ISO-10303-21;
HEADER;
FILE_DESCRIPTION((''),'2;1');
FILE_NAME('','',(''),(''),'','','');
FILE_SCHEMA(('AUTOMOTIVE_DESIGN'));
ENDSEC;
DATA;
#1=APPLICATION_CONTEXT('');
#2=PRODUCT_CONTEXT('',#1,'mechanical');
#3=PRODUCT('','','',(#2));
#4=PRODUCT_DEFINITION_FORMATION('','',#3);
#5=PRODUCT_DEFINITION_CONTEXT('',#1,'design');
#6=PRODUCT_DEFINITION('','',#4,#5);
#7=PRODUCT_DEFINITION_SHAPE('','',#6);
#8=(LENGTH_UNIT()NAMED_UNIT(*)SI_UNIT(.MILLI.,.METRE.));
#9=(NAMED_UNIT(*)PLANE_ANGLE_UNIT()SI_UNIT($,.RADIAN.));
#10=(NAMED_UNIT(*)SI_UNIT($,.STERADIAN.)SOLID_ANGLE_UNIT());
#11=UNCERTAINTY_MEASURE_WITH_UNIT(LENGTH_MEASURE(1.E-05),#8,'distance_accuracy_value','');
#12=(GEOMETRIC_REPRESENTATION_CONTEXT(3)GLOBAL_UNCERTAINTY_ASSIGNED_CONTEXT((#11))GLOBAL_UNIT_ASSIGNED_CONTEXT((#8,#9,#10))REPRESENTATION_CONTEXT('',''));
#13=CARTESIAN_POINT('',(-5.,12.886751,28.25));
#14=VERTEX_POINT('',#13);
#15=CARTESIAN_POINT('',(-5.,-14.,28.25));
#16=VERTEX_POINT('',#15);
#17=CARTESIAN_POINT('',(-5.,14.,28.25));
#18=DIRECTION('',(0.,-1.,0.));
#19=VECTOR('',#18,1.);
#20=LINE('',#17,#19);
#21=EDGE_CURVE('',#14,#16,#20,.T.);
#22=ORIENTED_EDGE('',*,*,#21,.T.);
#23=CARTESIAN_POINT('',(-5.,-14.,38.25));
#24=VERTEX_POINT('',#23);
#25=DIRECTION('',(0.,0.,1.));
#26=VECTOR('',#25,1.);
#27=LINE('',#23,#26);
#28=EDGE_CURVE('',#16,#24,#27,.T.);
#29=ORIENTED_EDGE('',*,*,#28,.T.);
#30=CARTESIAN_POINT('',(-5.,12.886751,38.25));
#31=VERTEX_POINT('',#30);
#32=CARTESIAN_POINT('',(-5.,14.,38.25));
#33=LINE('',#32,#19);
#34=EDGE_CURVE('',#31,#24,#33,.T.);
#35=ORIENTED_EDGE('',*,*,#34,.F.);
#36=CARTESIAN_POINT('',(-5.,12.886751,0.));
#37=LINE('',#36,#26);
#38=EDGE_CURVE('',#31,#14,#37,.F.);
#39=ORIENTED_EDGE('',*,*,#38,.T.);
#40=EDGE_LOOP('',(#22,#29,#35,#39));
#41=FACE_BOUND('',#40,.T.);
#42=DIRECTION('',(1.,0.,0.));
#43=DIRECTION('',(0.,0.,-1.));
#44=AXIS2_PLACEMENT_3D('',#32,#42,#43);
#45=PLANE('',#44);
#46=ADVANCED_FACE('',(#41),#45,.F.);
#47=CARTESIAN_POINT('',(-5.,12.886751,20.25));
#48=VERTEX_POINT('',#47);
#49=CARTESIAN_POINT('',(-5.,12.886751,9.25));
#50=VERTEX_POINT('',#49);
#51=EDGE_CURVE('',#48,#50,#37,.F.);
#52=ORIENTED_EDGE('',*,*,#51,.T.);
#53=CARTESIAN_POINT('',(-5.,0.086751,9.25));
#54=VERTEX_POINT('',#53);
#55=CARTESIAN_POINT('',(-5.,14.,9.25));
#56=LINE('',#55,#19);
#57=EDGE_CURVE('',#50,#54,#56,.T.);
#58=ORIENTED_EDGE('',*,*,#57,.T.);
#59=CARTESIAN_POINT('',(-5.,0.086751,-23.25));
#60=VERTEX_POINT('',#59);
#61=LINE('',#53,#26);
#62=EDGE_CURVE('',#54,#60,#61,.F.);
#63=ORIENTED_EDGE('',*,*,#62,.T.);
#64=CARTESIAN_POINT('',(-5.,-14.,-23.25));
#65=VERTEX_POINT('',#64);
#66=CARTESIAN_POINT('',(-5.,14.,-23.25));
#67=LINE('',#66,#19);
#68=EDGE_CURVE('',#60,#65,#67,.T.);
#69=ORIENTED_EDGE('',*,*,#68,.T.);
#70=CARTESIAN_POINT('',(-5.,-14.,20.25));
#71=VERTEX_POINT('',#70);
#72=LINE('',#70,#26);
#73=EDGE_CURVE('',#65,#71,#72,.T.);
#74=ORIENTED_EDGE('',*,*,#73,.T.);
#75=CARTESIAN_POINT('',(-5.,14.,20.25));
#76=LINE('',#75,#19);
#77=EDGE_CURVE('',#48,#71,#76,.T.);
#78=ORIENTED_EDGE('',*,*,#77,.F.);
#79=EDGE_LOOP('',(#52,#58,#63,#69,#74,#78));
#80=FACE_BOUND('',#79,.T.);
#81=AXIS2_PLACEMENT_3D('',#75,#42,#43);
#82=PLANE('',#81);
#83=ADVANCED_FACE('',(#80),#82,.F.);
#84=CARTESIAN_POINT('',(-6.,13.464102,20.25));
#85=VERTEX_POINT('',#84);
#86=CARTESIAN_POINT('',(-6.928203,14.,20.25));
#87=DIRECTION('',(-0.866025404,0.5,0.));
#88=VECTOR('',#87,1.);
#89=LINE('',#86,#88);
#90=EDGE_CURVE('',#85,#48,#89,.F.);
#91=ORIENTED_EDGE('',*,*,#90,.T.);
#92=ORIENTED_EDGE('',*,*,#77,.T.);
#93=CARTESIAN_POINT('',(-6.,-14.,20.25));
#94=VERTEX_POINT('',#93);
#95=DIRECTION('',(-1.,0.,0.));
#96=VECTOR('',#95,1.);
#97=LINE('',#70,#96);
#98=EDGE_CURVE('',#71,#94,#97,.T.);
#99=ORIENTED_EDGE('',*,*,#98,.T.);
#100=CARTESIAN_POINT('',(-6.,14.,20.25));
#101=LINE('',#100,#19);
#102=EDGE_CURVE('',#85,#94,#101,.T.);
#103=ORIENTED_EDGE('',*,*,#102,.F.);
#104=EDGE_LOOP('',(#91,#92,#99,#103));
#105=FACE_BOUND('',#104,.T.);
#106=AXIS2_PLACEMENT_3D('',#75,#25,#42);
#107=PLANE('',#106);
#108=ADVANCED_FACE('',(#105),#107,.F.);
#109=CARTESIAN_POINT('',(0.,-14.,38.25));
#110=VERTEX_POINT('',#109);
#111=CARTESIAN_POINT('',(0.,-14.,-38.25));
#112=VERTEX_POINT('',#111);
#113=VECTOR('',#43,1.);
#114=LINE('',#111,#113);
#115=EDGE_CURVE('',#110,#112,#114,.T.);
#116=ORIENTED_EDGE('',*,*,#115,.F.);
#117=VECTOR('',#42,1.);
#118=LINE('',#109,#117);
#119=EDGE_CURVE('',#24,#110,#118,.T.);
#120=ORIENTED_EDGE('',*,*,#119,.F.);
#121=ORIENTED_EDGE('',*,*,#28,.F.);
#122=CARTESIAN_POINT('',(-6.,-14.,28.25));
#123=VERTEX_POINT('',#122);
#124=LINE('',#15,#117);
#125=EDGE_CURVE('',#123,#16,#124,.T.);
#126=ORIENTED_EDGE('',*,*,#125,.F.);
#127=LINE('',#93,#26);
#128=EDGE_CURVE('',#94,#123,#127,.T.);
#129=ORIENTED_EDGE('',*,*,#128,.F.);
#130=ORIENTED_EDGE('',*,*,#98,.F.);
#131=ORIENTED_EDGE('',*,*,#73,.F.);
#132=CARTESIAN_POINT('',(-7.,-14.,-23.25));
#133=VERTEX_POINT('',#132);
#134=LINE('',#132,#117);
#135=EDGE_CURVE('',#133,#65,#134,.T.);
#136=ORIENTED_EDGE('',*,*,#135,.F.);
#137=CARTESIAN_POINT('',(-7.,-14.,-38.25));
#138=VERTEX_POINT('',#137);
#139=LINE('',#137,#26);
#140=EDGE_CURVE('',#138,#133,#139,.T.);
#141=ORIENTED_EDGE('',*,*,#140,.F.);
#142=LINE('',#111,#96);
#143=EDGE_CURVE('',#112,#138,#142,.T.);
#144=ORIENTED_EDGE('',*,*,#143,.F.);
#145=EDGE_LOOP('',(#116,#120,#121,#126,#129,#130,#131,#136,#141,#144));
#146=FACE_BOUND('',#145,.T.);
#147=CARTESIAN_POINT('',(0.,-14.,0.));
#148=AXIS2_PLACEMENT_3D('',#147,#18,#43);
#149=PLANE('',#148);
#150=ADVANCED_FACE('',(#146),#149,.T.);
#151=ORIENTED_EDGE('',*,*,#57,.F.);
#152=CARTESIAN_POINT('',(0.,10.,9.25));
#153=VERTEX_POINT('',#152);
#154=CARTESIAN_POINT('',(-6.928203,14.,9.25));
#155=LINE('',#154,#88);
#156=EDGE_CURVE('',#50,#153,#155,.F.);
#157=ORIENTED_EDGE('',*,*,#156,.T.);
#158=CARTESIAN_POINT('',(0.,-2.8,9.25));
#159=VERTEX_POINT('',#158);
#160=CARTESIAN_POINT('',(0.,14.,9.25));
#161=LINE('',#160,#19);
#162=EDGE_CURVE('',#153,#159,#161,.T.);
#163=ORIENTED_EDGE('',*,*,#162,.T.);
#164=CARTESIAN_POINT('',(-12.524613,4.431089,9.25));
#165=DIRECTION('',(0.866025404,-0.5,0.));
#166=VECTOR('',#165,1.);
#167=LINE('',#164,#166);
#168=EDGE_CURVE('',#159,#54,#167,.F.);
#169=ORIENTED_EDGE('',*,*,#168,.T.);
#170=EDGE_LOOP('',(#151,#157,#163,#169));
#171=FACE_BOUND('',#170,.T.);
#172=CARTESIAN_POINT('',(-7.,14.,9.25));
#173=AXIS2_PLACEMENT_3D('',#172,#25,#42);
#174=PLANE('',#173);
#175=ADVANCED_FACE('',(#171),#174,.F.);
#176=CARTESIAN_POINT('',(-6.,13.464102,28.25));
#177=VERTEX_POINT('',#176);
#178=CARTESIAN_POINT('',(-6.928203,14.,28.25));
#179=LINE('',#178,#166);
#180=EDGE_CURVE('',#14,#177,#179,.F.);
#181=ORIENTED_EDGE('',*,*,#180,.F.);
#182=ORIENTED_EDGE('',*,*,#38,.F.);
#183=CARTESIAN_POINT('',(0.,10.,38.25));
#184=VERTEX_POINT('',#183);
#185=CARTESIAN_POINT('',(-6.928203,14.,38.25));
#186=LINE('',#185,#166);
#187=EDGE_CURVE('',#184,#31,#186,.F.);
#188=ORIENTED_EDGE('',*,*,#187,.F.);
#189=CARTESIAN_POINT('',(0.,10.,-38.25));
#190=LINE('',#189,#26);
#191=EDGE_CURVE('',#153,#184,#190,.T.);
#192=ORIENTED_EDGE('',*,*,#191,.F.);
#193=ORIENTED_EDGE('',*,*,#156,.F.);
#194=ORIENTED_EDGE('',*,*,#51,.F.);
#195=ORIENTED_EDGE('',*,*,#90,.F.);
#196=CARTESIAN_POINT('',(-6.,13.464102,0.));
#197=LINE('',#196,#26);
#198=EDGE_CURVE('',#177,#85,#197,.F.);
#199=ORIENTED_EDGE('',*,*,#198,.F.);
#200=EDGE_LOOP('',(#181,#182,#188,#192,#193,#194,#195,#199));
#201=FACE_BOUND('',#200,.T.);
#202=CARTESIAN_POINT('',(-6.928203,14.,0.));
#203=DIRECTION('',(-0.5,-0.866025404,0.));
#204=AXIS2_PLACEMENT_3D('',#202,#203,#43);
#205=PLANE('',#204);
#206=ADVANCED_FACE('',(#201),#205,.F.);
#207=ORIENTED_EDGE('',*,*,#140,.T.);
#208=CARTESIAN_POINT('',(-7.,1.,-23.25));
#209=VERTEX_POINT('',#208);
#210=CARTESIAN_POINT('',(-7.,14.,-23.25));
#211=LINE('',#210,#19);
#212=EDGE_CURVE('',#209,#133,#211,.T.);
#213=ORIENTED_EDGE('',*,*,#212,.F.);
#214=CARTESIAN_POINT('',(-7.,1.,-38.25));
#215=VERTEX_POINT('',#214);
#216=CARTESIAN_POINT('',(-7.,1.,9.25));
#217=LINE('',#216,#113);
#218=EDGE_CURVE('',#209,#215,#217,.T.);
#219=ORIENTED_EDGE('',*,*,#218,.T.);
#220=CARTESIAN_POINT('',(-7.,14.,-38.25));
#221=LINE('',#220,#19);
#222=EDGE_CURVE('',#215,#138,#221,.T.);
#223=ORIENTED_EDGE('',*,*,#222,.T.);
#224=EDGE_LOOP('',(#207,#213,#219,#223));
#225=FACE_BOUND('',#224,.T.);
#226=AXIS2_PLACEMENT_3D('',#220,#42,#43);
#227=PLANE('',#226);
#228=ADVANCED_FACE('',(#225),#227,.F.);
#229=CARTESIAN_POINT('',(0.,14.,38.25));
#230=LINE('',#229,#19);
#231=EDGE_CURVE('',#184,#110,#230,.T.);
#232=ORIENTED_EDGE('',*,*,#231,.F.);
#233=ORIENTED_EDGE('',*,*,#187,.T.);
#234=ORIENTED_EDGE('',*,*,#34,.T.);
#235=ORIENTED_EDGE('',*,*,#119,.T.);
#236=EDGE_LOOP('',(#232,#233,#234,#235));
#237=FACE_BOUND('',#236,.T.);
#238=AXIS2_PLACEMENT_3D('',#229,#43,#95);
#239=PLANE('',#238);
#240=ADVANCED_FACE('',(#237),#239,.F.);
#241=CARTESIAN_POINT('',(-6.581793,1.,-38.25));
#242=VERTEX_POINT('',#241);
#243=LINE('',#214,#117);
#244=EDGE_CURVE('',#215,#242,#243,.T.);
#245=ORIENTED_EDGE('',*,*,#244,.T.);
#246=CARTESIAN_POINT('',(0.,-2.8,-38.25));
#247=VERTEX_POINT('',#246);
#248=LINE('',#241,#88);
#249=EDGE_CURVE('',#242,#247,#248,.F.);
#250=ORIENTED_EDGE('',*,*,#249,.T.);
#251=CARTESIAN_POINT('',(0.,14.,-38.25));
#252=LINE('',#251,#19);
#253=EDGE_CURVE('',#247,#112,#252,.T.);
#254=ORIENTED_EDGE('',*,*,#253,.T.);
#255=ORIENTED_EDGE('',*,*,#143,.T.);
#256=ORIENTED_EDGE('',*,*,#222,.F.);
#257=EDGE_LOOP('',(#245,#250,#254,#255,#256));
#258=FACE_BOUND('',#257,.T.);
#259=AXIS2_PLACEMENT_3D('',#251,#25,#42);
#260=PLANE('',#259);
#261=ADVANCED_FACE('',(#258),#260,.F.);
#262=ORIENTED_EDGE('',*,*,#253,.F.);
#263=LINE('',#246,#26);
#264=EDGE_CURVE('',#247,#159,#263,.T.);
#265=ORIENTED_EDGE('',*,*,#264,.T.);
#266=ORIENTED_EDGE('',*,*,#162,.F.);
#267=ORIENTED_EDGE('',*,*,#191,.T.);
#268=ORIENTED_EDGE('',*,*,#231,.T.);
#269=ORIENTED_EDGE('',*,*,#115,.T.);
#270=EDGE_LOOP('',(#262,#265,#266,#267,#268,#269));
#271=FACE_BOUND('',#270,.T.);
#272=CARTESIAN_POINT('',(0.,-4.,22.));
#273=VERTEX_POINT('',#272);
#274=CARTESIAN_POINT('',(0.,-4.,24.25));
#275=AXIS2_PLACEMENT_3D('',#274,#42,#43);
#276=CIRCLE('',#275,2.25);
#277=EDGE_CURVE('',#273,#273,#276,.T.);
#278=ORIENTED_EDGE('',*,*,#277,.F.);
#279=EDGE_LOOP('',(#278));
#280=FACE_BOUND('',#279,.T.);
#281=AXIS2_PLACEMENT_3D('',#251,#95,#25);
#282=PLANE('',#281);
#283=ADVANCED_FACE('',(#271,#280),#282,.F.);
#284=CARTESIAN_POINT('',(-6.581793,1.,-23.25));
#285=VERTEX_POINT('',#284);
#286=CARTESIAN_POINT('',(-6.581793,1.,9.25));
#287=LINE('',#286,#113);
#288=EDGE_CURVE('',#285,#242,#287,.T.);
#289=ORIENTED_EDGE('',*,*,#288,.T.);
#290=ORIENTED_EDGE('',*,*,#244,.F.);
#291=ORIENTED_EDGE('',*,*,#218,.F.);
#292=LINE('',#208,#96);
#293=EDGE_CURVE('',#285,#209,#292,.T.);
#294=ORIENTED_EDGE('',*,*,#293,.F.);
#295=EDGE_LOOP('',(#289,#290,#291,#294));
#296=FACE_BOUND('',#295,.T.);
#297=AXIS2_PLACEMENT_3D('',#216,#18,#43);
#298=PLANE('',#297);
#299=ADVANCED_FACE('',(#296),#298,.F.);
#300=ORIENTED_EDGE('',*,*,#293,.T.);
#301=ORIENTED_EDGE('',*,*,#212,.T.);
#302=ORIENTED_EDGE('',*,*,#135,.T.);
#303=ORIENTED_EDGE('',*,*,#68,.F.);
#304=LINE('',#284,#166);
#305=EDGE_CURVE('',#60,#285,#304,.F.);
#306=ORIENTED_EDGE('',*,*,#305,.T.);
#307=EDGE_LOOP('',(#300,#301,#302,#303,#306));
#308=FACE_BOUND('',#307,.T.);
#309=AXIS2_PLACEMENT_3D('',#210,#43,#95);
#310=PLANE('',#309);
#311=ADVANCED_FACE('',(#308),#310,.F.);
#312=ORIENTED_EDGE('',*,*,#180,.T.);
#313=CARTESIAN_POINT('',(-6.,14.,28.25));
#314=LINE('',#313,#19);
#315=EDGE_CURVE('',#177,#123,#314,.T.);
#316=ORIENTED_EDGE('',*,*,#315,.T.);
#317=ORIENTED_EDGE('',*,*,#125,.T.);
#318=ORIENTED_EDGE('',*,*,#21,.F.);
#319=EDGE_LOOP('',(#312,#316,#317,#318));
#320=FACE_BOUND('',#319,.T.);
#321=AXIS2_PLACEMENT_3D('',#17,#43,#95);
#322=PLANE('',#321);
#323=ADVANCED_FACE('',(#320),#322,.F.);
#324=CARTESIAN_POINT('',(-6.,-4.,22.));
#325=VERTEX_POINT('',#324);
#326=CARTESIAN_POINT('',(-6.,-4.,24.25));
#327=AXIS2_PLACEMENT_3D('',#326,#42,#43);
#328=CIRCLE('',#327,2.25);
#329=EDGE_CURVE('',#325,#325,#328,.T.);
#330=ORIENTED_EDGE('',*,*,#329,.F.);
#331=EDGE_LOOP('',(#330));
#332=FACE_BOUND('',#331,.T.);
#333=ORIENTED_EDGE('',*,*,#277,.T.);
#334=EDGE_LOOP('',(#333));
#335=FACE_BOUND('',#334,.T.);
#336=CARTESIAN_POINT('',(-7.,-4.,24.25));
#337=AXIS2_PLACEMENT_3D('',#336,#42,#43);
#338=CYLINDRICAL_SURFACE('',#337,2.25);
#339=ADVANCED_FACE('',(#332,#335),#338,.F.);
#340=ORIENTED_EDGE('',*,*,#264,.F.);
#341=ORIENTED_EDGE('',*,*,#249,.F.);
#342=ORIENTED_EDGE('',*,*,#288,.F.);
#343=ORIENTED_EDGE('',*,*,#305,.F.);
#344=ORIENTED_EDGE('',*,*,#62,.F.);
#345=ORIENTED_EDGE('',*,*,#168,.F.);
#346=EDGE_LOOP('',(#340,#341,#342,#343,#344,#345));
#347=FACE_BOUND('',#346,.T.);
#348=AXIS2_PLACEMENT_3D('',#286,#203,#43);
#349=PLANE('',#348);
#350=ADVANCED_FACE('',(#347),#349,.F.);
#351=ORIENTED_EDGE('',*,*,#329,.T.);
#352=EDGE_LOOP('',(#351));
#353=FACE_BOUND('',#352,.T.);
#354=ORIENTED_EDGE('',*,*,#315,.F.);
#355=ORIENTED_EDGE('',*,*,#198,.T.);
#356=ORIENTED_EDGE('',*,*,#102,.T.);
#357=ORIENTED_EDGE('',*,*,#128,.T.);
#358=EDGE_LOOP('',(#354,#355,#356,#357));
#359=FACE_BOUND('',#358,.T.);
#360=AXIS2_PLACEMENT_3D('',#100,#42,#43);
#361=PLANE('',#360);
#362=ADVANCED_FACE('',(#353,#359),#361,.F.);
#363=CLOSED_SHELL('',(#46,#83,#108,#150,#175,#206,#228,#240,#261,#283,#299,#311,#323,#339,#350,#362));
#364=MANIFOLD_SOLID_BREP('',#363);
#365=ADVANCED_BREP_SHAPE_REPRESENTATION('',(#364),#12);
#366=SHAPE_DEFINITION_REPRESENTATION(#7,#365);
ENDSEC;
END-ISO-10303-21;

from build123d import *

# Parameters (mm, degrees)
BOSS_EXTRUDE1_DEPTH = 14
SKETCH2_R           = 2.25
CUT_EXTRUDE1_DEPTH  = 42.328712779
SKETCH4_W           = 47.5
SKETCH4_H           = 13
CUT_EXTRUDE3_DEPTH  = 42.328712779
CHAMFER1_SIZE       = 6.92820323
CHAMFER1_SIZE_2     = 4
CHAMFER2_SIZE       = 3.8
CHAMFER2_SIZE2      = 6.581793069


with BuildPart() as part:
    # Sketch1 → Boss-Extrude1 (new, symmetric)
    with BuildSketch(Plane(origin=(0, 0, 0), x_dir=(1, 0, 0), z_dir=(0, 1, 0))):
        Polygon((-5, -20.25), (-5, 23.25), (-7, 23.25), (-7, 38.25), (0, 38.25), (0, -38.25), (-5, -38.25), (-5, -28.25), (-6, -28.25), (-6, -20.25), align=None)
    extrude(amount=BOSS_EXTRUDE1_DEPTH, both=True)

    # Sketch2 → Cut-Extrude1 (cut, through all)
    with BuildSketch(Plane(origin=(0, 0, 0), x_dir=(0, 0, -1), z_dir=(1, 0, 0))):
        with Locations((-24.25, -4)):
            Circle(SKETCH2_R)
    extrude(amount=-CUT_EXTRUDE1_DEPTH, mode=Mode.SUBTRACT)

    # Sketch4 → Cut-Extrude3 (cut, through all)
    with BuildSketch(Plane(origin=(0, 0, 0), x_dir=(0, 0, -1), z_dir=(1, 0, 0))):
        with Locations((14.5, 7.5)):
            Rectangle(SKETCH4_W, SKETCH4_H)
    extrude(amount=-CUT_EXTRUDE3_DEPTH, mode=Mode.SUBTRACT)

    # Chamfer1
    # the kernel refuses this chamfer: 6.92820323, 4 mm, written as the material it takes off along each edge
    with BuildSketch(Plane(origin=(0, 14, -8.673855882), x_dir=(-0.9998132206222079, 0.01932676561270069, 0), z_dir=(0, 0, 1))) as chamfer1_piece_1:
        Polygon((CHAMFER1_SIZE * 0.999813220662, CHAMFER1_SIZE * 0.0193267656135), (-CHAMFER1_SIZE_2 * 0.0193267656127, CHAMFER1_SIZE_2 * 0.999813220622), (0, 0), align=None)
    extrude(amount=64.847711765, mode=Mode.SUBTRACT)

    # Chamfer2
    chamfer2_edges = [part.edges().sort_by_distance(p)[0] for p in [
        (0, 1, -14.5),
    ]]
    chamfer2_side = [part.faces().sort_by_distance(p)[0] for p in [
        (0, -4.279514007, 4.174270011),
    ]]
    chamfer(chamfer2_edges, length=CHAMFER2_SIZE, length2=CHAMFER2_SIZE2, reference=chamfer2_side[0])


solid = part.part
